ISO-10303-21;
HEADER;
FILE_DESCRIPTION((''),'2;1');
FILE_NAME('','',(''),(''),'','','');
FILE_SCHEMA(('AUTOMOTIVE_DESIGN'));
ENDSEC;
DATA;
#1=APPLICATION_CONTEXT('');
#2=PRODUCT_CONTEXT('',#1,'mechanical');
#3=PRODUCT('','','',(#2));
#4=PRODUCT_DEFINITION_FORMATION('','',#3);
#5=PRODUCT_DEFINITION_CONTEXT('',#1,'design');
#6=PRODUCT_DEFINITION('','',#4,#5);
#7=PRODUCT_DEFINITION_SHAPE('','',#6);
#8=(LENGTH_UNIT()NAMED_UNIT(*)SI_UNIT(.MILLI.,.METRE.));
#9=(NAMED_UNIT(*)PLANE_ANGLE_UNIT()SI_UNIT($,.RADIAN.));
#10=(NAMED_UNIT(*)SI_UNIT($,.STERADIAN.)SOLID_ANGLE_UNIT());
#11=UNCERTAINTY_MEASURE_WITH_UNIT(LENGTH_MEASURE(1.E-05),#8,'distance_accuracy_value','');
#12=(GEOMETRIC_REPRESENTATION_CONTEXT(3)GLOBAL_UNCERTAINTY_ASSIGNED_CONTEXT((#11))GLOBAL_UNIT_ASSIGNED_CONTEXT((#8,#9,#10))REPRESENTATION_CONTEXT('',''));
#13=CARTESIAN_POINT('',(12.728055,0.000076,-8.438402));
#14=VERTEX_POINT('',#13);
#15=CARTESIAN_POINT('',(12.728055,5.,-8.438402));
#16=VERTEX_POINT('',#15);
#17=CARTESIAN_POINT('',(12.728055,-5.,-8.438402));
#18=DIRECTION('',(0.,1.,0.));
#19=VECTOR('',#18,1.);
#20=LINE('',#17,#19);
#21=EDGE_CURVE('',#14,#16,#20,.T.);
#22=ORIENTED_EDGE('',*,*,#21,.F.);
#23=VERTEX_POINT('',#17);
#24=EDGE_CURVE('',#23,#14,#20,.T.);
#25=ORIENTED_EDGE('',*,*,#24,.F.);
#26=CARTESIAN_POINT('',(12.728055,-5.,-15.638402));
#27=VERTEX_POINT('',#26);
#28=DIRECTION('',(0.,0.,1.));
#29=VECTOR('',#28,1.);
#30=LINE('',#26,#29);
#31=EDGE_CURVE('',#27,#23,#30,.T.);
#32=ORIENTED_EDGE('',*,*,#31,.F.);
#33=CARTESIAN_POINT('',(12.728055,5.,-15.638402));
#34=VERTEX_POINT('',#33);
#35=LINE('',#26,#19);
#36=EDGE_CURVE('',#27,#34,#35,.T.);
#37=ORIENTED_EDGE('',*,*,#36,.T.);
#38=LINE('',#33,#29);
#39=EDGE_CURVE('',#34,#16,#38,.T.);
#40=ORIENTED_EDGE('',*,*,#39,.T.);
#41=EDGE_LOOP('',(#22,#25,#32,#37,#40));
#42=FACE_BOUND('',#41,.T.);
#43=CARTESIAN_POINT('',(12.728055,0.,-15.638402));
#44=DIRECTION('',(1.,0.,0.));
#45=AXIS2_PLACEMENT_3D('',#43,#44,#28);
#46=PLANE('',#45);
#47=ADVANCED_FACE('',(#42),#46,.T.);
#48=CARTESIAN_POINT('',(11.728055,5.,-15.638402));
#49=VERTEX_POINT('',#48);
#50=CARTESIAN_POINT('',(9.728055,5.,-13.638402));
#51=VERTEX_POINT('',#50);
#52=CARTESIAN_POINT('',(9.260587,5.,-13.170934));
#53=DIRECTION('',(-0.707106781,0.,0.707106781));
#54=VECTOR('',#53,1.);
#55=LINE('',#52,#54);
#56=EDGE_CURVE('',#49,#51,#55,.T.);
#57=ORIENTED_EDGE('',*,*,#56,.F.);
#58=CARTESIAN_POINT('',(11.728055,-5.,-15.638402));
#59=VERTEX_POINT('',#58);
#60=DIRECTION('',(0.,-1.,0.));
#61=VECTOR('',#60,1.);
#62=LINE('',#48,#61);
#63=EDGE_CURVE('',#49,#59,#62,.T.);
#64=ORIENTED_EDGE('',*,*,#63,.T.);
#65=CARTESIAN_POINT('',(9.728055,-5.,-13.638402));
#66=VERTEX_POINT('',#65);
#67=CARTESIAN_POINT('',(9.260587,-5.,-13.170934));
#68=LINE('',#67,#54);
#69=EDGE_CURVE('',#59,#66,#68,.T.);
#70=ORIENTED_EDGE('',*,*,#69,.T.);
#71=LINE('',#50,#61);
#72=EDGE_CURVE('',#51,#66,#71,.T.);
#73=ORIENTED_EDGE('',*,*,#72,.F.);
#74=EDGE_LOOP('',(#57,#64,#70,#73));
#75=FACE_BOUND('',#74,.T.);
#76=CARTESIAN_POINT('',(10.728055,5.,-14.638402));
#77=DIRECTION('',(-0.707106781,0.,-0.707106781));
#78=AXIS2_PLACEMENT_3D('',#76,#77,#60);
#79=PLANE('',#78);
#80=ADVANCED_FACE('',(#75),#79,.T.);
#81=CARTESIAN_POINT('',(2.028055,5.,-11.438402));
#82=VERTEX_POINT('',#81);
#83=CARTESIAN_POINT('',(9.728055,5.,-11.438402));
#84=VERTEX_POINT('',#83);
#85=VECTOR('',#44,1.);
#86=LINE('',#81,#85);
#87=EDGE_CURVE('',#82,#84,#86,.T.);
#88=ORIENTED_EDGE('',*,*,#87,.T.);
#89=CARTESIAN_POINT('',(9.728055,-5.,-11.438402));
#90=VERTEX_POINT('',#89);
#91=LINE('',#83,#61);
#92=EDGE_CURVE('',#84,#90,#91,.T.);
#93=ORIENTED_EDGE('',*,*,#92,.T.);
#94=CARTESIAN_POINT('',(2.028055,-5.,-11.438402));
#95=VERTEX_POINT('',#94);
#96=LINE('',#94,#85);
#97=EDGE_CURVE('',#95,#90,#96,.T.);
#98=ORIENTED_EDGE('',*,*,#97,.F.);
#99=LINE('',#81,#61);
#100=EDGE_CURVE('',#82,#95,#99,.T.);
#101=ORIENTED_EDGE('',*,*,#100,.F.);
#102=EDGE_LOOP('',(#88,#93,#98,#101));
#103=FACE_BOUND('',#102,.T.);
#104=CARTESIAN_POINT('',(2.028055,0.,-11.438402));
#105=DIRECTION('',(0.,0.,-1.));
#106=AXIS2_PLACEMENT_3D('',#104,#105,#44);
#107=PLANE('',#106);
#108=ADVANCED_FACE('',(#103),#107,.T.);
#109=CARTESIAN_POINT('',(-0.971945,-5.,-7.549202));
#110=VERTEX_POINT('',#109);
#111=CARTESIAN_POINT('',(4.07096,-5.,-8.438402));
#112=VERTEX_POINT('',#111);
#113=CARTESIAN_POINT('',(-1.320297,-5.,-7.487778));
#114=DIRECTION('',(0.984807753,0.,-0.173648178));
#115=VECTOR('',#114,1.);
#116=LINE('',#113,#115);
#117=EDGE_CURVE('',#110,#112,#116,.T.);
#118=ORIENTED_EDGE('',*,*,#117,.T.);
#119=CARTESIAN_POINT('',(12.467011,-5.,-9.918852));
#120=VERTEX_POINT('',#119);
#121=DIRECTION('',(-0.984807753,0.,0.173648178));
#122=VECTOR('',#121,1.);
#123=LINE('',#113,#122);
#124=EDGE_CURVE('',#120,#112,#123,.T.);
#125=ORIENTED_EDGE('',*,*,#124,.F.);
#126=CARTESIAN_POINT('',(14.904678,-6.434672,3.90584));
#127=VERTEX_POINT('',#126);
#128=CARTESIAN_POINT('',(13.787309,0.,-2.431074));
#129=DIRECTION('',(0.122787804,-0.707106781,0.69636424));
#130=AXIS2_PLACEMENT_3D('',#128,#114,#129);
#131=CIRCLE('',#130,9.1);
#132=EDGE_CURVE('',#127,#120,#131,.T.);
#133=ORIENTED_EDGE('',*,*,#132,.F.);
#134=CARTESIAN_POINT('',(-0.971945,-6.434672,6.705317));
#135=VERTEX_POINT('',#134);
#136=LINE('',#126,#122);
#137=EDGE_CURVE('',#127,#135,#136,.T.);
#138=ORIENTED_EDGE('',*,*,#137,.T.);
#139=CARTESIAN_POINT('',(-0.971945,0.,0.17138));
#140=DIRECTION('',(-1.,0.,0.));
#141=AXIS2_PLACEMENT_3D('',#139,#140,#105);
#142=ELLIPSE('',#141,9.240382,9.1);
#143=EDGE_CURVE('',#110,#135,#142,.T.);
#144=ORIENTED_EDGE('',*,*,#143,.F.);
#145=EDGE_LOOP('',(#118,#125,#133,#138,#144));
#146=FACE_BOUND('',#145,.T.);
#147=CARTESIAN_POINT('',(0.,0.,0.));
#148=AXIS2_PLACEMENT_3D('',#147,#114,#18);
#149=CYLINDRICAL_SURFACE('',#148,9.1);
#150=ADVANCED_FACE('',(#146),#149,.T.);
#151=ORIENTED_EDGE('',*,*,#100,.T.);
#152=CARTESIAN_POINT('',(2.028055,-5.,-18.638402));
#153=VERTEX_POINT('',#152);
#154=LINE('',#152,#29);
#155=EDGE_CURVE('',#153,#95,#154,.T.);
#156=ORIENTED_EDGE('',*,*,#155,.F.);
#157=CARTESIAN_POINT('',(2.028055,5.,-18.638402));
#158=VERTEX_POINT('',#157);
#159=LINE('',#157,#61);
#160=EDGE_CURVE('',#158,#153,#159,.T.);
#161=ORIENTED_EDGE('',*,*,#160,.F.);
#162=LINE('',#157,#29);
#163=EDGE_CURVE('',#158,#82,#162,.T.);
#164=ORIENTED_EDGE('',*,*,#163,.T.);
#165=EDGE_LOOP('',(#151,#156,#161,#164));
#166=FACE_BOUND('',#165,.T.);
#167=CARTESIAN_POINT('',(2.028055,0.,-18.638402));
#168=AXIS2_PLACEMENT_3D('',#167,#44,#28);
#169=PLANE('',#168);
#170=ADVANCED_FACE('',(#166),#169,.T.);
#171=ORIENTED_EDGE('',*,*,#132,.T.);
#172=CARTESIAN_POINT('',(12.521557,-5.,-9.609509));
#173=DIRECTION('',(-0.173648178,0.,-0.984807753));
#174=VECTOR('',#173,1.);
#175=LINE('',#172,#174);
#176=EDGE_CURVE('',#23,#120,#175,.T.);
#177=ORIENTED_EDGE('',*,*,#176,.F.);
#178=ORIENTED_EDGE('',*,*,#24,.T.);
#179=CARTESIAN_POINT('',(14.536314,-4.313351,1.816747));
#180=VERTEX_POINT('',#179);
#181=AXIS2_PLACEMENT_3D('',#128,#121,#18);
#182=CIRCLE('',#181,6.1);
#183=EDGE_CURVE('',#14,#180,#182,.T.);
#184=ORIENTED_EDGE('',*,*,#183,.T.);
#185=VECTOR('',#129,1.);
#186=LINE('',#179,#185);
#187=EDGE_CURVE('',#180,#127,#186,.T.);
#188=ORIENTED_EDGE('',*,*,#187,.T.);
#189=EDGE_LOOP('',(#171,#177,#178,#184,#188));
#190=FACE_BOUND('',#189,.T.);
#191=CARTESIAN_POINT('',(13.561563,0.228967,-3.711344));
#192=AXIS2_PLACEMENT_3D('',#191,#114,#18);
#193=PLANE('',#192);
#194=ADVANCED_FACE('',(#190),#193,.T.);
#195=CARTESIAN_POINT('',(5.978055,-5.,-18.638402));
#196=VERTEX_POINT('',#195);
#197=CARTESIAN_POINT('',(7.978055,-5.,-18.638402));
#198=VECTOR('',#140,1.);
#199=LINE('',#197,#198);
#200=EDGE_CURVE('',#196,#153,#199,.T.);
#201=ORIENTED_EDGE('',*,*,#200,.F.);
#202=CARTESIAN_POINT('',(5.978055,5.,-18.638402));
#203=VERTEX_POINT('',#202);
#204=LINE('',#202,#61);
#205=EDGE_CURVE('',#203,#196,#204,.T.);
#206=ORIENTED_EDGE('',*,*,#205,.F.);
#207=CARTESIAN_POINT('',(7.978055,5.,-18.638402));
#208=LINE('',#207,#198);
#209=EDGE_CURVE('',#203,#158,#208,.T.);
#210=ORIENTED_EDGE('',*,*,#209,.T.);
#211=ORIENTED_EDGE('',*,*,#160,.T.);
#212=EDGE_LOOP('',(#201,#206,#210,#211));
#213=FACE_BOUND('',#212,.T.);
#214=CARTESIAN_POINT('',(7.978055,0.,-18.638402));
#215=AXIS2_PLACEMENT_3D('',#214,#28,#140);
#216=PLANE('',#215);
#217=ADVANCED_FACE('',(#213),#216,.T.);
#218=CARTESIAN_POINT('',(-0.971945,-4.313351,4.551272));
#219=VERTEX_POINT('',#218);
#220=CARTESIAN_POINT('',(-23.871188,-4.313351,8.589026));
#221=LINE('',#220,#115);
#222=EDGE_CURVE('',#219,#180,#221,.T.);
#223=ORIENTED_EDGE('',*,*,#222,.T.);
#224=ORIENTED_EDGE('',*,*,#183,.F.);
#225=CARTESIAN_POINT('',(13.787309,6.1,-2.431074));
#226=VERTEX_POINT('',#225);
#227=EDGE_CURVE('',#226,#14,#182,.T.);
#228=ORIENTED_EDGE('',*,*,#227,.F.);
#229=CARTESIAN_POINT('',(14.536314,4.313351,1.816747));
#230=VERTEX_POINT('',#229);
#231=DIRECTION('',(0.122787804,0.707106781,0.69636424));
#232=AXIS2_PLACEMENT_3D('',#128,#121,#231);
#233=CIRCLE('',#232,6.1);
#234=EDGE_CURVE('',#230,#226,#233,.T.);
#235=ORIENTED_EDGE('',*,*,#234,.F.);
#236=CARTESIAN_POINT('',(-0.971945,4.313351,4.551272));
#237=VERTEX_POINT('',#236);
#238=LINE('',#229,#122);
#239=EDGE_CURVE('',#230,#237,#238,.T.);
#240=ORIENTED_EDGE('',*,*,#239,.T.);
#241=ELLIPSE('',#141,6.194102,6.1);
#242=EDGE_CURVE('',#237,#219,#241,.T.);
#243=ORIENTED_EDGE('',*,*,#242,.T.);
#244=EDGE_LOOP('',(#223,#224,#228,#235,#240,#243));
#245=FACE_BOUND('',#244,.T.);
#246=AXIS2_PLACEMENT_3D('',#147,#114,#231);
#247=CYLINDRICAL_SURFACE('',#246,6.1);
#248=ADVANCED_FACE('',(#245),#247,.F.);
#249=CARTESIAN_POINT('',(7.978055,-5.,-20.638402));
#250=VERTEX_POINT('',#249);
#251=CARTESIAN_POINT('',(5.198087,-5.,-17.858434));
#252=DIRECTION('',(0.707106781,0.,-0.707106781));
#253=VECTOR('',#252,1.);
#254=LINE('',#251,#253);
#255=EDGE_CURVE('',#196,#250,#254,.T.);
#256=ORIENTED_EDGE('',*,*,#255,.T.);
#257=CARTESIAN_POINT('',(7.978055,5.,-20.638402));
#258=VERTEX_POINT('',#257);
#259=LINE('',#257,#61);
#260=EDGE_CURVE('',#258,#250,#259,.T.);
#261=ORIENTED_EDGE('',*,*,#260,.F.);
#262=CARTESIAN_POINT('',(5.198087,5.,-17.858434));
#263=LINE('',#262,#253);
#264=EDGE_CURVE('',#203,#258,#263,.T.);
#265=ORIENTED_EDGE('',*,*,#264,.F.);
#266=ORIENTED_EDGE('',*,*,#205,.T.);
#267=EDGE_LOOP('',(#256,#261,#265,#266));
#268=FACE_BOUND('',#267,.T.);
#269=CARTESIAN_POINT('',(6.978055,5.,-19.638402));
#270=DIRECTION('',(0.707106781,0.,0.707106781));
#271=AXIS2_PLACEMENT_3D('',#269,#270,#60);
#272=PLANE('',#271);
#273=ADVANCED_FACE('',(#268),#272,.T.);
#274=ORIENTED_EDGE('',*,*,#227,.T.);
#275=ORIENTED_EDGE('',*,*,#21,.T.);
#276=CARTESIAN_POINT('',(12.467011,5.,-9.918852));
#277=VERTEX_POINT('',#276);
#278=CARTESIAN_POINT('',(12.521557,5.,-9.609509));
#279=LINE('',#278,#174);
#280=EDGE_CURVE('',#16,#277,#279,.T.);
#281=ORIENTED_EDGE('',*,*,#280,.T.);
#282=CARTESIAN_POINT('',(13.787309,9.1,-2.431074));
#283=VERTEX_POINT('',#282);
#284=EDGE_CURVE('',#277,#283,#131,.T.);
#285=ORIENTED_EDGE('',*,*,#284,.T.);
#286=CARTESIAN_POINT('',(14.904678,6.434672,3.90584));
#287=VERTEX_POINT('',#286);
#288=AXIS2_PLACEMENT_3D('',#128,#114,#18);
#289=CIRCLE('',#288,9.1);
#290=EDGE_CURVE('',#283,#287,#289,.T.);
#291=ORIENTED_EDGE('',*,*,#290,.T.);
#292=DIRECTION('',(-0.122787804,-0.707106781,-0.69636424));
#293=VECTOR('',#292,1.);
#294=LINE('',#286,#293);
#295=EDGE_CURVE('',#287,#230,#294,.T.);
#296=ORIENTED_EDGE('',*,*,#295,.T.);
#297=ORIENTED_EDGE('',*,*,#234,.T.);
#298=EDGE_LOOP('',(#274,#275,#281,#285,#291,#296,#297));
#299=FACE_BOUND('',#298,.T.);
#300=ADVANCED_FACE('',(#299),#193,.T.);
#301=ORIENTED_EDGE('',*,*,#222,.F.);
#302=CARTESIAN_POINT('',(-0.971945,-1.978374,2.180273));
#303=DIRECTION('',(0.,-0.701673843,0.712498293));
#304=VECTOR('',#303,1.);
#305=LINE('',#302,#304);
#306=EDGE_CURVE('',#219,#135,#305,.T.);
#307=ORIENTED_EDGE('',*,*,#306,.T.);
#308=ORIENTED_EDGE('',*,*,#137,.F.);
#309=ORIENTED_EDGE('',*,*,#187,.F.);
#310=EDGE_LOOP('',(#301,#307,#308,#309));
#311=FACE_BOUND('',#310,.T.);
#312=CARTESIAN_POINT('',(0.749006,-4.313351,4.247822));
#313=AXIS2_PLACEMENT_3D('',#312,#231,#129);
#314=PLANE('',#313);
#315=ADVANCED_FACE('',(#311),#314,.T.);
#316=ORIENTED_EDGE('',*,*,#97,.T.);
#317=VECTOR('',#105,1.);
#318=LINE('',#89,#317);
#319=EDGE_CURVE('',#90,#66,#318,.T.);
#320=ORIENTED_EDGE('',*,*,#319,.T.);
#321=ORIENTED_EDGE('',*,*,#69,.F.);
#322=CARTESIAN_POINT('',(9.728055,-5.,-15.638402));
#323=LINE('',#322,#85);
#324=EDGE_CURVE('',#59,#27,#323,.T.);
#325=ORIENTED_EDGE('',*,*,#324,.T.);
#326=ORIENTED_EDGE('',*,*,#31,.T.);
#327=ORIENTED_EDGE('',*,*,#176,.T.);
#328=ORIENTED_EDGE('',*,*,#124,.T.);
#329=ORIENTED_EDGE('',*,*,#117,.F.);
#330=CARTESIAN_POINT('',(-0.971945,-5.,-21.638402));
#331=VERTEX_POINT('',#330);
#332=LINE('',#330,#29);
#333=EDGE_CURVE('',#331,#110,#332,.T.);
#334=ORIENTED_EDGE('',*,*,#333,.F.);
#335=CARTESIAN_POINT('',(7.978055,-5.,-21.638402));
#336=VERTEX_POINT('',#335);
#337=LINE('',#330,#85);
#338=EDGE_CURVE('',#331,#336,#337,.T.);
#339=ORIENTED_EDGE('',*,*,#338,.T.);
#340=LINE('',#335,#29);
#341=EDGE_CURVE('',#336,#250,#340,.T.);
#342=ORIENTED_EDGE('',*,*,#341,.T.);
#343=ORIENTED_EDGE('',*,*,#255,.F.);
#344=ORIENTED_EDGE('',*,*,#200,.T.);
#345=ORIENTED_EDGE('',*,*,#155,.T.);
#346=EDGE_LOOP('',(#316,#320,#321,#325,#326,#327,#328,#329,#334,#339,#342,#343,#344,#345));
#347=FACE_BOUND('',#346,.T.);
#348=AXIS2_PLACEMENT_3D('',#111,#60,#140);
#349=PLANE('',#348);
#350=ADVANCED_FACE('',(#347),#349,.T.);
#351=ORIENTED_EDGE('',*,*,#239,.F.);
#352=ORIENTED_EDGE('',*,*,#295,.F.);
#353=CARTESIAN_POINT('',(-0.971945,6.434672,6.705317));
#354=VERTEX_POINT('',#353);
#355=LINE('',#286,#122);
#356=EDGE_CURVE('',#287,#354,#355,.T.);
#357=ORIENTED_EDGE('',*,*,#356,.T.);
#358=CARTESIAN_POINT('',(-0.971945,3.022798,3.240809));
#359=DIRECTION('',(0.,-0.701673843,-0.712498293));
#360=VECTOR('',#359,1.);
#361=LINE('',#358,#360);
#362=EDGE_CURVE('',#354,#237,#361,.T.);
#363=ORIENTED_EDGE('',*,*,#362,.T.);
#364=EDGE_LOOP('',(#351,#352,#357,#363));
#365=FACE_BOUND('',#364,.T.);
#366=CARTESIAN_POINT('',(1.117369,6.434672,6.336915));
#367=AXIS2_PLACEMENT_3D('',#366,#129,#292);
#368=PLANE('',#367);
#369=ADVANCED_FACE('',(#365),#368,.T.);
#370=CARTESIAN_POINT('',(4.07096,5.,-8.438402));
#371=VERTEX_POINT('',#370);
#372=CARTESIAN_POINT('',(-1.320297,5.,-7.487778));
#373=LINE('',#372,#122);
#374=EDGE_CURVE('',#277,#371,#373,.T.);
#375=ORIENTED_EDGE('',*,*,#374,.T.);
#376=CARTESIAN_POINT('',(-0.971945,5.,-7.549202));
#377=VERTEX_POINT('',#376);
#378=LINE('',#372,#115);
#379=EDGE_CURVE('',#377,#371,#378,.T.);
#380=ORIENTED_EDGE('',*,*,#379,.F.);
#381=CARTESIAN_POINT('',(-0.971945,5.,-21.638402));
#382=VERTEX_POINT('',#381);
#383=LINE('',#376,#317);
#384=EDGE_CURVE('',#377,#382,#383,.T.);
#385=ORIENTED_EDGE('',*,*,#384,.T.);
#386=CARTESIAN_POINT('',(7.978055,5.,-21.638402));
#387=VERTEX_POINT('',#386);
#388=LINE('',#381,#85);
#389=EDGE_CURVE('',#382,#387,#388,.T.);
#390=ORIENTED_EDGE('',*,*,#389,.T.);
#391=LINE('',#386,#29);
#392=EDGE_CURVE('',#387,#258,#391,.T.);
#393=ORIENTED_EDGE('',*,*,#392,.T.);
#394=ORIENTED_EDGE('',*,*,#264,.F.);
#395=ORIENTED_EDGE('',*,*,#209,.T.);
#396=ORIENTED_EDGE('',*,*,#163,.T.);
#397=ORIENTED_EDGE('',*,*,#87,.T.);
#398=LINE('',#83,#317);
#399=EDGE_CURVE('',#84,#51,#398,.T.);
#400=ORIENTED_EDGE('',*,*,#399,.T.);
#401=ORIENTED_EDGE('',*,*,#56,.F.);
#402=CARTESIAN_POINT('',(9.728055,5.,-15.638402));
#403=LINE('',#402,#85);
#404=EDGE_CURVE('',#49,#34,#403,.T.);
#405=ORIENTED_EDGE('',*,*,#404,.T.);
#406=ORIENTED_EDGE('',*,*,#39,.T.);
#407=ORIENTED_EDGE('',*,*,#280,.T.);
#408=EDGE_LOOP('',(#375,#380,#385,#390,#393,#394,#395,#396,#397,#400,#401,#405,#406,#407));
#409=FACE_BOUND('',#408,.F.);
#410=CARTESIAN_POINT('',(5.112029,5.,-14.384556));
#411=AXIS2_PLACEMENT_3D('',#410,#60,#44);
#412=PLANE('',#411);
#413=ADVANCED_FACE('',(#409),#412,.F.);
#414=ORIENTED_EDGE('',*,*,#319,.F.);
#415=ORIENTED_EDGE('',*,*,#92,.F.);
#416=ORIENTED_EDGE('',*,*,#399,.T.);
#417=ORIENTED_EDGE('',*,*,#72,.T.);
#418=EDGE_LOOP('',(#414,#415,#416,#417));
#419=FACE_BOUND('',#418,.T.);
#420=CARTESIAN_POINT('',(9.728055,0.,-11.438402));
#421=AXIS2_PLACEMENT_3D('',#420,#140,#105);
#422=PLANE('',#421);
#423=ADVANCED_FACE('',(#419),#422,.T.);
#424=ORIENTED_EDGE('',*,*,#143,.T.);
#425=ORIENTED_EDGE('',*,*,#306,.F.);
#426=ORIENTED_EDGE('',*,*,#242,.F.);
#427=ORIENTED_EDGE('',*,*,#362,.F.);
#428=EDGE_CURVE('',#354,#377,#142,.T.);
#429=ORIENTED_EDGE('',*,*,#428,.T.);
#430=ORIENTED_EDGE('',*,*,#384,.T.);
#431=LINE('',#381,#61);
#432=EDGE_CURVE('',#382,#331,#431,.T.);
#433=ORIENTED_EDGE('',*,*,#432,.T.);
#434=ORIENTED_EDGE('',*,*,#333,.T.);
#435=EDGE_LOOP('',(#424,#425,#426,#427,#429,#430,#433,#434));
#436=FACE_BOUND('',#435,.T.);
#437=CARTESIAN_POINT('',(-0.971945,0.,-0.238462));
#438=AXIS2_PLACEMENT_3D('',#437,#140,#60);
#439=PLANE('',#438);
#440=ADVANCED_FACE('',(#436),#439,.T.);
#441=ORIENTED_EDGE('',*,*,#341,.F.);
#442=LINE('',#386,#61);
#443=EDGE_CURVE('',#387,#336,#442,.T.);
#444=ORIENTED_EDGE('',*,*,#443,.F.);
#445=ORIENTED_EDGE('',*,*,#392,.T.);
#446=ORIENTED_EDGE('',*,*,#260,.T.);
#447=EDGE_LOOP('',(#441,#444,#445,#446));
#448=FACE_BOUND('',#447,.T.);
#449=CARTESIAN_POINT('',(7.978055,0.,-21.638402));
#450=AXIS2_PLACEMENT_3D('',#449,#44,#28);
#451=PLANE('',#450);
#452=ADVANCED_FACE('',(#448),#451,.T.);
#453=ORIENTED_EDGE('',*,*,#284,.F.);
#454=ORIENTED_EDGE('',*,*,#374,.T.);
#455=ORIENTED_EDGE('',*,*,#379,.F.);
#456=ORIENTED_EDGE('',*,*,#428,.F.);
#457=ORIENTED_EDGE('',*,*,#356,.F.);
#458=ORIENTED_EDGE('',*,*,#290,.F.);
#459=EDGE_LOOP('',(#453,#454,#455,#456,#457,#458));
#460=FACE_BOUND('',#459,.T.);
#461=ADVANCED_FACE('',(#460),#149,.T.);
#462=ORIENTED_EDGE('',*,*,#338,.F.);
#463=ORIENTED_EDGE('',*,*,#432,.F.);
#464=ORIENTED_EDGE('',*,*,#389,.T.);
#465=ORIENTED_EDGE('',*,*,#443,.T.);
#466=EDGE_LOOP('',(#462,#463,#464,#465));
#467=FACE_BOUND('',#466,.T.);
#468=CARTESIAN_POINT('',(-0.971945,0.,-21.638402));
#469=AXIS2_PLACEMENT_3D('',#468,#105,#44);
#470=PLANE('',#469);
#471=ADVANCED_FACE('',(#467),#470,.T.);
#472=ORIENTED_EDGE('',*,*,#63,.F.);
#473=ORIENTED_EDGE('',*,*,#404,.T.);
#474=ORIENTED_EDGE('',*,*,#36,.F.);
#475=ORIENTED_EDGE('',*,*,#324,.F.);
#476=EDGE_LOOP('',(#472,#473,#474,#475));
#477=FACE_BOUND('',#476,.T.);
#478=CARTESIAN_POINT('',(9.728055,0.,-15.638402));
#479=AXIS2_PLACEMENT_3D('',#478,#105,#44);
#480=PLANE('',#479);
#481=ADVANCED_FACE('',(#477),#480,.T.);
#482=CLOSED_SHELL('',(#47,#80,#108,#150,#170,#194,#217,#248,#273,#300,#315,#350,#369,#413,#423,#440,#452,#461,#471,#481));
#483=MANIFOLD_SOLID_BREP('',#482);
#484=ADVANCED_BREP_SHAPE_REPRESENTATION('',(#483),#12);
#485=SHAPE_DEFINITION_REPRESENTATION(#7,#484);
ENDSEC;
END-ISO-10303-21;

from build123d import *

# Parameters (mm, degrees)
F3_DEPTH  = 14
F5_DEPTH  = 5
F6_SIZE   = 2
F7_DEPTH  = 25
F9_DEPTH  = 51.6
F10_DEPTH = 1.1


# Not quite as in the source:
# - a feature names something its author has since deleted; it is built from what else it names


with BuildPart() as f3:
    # F2 (on line) → F3 (new body)
    with BuildSketch(Plane(origin=(0, 0, 0), x_dir=(0, 1, 0), z_dir=(0.984807753, 0, -0.1736481777))):
        with BuildLine():
            ThreePointArc((4.3133513652, 4.3133513652), (5.6356651483, 2.3343689374), (6.1, 0))
            ThreePointArc((6.1, 0), (-2.3343689374, -5.6356651483), (-4.3133513652, 4.3133513652))
            Line((-4.3133513652, 4.3133513652), (-6.4346717088, 6.4346717088))
            ThreePointArc((-6.4346717088, 6.4346717088), (-3.4824192345, -8.4073037459), (9.1, 0))
            ThreePointArc((9.1, 0), (8.4073037459, 3.4824192345), (6.4346717088, 6.4346717088))
            Line((6.4346717088, 6.4346717088), (4.3133513652, 4.3133513652))
        make_face()
    extrude(amount=F3_DEPTH)

    # F4 (on Front) → F5 (join, symmetric)
    with BuildSketch(Plane.XZ):
        Polygon((-0.9719453416, -8.4384017807), (-0.9719453416, -21.6384017807), (7.9780546584, -21.6384017807), (7.9780546584, -18.6384017807), (2.0280546584, -18.6384017807), (2.0280546584, -11.4384017807), (9.7280546584, -11.4384017807), (9.7280546584, -15.6384017807), (12.7280546584, -15.6384017807), (12.7280546584, -11.4438512443), (12.7280546584, -8.4384017807), align=None)
    extrude(amount=F5_DEPTH, both=True)

    # F6
    f6_edges = [f3.edges().sort_by_distance(p)[0] for p in [
        (9.728055, 0, -15.638402),
        (7.978055, 0, -18.638402),
    ]]
    chamfer(f6_edges, length=F6_SIZE)

    # F7 (add): a face of the model
    f7_faces = [f3.faces().sort_by_distance(p)[0] for p in [
        (-1.1008050308, 0, -6.2429755581),
    ]]
    extrude(f7_faces, amount=F7_DEPTH)

    # F8 (on face) → F9 (cut)
    with BuildSketch(Plane(origin=(-0.9719453416, 0, 0), x_dir=(0, -1, 0), z_dir=(-1, 0, 0))):
        with BuildLine():
            Line((22.6868242025, -11.5467039868), (22.6868242025, 11.5467039868))
            Line((22.6868242025, 11.5467039868), (-22.6868242025, 11.5467039868))
            Line((-22.6868242025, 11.5467039868), (-22.6868242025, -11.5467039868))
            Line((-22.6868242025, -11.5467039868), (-5, -11.5467039868))
            Line((-5, -11.5467039868), (-5, -8.4384017807))
            Line((-5, -8.4384017807), (-3.3040728779, -8.4384017807))
            add(Edge.make_bspline(
                [(-3.3040728779, -8.4384017807), (0, -9.7457887872), (3.3040728779, -8.4384017807)],
                knots=[2.7700160081, 2.7700160081, 2.7700160081, 3.5131692991, 3.5131692991, 3.5131692991], degree=2, weights=[1, 0.9317560477, 1]))
            Line((3.3040728779, -8.4384017807), (5, -8.4384017807))
            Line((5, -8.4384017807), (5, -11.5467039868))
            Line((5, -11.5467039868), (22.6868242025, -11.5467039868))
        make_face()
    extrude(amount=F9_DEPTH, mode=Mode.SUBTRACT)

    # F10 (add): faces of the model
    f10_faces = [f3.faces().sort_by_distance(p)[0] for p in [
        (0.6395749646, -4.4604313904, -8.4384017807),
        (0.6395749646, 4.4604313904, -8.4384017807),
    ]]
    extrude(f10_faces, amount=F10_DEPTH)


solid = f3.part
